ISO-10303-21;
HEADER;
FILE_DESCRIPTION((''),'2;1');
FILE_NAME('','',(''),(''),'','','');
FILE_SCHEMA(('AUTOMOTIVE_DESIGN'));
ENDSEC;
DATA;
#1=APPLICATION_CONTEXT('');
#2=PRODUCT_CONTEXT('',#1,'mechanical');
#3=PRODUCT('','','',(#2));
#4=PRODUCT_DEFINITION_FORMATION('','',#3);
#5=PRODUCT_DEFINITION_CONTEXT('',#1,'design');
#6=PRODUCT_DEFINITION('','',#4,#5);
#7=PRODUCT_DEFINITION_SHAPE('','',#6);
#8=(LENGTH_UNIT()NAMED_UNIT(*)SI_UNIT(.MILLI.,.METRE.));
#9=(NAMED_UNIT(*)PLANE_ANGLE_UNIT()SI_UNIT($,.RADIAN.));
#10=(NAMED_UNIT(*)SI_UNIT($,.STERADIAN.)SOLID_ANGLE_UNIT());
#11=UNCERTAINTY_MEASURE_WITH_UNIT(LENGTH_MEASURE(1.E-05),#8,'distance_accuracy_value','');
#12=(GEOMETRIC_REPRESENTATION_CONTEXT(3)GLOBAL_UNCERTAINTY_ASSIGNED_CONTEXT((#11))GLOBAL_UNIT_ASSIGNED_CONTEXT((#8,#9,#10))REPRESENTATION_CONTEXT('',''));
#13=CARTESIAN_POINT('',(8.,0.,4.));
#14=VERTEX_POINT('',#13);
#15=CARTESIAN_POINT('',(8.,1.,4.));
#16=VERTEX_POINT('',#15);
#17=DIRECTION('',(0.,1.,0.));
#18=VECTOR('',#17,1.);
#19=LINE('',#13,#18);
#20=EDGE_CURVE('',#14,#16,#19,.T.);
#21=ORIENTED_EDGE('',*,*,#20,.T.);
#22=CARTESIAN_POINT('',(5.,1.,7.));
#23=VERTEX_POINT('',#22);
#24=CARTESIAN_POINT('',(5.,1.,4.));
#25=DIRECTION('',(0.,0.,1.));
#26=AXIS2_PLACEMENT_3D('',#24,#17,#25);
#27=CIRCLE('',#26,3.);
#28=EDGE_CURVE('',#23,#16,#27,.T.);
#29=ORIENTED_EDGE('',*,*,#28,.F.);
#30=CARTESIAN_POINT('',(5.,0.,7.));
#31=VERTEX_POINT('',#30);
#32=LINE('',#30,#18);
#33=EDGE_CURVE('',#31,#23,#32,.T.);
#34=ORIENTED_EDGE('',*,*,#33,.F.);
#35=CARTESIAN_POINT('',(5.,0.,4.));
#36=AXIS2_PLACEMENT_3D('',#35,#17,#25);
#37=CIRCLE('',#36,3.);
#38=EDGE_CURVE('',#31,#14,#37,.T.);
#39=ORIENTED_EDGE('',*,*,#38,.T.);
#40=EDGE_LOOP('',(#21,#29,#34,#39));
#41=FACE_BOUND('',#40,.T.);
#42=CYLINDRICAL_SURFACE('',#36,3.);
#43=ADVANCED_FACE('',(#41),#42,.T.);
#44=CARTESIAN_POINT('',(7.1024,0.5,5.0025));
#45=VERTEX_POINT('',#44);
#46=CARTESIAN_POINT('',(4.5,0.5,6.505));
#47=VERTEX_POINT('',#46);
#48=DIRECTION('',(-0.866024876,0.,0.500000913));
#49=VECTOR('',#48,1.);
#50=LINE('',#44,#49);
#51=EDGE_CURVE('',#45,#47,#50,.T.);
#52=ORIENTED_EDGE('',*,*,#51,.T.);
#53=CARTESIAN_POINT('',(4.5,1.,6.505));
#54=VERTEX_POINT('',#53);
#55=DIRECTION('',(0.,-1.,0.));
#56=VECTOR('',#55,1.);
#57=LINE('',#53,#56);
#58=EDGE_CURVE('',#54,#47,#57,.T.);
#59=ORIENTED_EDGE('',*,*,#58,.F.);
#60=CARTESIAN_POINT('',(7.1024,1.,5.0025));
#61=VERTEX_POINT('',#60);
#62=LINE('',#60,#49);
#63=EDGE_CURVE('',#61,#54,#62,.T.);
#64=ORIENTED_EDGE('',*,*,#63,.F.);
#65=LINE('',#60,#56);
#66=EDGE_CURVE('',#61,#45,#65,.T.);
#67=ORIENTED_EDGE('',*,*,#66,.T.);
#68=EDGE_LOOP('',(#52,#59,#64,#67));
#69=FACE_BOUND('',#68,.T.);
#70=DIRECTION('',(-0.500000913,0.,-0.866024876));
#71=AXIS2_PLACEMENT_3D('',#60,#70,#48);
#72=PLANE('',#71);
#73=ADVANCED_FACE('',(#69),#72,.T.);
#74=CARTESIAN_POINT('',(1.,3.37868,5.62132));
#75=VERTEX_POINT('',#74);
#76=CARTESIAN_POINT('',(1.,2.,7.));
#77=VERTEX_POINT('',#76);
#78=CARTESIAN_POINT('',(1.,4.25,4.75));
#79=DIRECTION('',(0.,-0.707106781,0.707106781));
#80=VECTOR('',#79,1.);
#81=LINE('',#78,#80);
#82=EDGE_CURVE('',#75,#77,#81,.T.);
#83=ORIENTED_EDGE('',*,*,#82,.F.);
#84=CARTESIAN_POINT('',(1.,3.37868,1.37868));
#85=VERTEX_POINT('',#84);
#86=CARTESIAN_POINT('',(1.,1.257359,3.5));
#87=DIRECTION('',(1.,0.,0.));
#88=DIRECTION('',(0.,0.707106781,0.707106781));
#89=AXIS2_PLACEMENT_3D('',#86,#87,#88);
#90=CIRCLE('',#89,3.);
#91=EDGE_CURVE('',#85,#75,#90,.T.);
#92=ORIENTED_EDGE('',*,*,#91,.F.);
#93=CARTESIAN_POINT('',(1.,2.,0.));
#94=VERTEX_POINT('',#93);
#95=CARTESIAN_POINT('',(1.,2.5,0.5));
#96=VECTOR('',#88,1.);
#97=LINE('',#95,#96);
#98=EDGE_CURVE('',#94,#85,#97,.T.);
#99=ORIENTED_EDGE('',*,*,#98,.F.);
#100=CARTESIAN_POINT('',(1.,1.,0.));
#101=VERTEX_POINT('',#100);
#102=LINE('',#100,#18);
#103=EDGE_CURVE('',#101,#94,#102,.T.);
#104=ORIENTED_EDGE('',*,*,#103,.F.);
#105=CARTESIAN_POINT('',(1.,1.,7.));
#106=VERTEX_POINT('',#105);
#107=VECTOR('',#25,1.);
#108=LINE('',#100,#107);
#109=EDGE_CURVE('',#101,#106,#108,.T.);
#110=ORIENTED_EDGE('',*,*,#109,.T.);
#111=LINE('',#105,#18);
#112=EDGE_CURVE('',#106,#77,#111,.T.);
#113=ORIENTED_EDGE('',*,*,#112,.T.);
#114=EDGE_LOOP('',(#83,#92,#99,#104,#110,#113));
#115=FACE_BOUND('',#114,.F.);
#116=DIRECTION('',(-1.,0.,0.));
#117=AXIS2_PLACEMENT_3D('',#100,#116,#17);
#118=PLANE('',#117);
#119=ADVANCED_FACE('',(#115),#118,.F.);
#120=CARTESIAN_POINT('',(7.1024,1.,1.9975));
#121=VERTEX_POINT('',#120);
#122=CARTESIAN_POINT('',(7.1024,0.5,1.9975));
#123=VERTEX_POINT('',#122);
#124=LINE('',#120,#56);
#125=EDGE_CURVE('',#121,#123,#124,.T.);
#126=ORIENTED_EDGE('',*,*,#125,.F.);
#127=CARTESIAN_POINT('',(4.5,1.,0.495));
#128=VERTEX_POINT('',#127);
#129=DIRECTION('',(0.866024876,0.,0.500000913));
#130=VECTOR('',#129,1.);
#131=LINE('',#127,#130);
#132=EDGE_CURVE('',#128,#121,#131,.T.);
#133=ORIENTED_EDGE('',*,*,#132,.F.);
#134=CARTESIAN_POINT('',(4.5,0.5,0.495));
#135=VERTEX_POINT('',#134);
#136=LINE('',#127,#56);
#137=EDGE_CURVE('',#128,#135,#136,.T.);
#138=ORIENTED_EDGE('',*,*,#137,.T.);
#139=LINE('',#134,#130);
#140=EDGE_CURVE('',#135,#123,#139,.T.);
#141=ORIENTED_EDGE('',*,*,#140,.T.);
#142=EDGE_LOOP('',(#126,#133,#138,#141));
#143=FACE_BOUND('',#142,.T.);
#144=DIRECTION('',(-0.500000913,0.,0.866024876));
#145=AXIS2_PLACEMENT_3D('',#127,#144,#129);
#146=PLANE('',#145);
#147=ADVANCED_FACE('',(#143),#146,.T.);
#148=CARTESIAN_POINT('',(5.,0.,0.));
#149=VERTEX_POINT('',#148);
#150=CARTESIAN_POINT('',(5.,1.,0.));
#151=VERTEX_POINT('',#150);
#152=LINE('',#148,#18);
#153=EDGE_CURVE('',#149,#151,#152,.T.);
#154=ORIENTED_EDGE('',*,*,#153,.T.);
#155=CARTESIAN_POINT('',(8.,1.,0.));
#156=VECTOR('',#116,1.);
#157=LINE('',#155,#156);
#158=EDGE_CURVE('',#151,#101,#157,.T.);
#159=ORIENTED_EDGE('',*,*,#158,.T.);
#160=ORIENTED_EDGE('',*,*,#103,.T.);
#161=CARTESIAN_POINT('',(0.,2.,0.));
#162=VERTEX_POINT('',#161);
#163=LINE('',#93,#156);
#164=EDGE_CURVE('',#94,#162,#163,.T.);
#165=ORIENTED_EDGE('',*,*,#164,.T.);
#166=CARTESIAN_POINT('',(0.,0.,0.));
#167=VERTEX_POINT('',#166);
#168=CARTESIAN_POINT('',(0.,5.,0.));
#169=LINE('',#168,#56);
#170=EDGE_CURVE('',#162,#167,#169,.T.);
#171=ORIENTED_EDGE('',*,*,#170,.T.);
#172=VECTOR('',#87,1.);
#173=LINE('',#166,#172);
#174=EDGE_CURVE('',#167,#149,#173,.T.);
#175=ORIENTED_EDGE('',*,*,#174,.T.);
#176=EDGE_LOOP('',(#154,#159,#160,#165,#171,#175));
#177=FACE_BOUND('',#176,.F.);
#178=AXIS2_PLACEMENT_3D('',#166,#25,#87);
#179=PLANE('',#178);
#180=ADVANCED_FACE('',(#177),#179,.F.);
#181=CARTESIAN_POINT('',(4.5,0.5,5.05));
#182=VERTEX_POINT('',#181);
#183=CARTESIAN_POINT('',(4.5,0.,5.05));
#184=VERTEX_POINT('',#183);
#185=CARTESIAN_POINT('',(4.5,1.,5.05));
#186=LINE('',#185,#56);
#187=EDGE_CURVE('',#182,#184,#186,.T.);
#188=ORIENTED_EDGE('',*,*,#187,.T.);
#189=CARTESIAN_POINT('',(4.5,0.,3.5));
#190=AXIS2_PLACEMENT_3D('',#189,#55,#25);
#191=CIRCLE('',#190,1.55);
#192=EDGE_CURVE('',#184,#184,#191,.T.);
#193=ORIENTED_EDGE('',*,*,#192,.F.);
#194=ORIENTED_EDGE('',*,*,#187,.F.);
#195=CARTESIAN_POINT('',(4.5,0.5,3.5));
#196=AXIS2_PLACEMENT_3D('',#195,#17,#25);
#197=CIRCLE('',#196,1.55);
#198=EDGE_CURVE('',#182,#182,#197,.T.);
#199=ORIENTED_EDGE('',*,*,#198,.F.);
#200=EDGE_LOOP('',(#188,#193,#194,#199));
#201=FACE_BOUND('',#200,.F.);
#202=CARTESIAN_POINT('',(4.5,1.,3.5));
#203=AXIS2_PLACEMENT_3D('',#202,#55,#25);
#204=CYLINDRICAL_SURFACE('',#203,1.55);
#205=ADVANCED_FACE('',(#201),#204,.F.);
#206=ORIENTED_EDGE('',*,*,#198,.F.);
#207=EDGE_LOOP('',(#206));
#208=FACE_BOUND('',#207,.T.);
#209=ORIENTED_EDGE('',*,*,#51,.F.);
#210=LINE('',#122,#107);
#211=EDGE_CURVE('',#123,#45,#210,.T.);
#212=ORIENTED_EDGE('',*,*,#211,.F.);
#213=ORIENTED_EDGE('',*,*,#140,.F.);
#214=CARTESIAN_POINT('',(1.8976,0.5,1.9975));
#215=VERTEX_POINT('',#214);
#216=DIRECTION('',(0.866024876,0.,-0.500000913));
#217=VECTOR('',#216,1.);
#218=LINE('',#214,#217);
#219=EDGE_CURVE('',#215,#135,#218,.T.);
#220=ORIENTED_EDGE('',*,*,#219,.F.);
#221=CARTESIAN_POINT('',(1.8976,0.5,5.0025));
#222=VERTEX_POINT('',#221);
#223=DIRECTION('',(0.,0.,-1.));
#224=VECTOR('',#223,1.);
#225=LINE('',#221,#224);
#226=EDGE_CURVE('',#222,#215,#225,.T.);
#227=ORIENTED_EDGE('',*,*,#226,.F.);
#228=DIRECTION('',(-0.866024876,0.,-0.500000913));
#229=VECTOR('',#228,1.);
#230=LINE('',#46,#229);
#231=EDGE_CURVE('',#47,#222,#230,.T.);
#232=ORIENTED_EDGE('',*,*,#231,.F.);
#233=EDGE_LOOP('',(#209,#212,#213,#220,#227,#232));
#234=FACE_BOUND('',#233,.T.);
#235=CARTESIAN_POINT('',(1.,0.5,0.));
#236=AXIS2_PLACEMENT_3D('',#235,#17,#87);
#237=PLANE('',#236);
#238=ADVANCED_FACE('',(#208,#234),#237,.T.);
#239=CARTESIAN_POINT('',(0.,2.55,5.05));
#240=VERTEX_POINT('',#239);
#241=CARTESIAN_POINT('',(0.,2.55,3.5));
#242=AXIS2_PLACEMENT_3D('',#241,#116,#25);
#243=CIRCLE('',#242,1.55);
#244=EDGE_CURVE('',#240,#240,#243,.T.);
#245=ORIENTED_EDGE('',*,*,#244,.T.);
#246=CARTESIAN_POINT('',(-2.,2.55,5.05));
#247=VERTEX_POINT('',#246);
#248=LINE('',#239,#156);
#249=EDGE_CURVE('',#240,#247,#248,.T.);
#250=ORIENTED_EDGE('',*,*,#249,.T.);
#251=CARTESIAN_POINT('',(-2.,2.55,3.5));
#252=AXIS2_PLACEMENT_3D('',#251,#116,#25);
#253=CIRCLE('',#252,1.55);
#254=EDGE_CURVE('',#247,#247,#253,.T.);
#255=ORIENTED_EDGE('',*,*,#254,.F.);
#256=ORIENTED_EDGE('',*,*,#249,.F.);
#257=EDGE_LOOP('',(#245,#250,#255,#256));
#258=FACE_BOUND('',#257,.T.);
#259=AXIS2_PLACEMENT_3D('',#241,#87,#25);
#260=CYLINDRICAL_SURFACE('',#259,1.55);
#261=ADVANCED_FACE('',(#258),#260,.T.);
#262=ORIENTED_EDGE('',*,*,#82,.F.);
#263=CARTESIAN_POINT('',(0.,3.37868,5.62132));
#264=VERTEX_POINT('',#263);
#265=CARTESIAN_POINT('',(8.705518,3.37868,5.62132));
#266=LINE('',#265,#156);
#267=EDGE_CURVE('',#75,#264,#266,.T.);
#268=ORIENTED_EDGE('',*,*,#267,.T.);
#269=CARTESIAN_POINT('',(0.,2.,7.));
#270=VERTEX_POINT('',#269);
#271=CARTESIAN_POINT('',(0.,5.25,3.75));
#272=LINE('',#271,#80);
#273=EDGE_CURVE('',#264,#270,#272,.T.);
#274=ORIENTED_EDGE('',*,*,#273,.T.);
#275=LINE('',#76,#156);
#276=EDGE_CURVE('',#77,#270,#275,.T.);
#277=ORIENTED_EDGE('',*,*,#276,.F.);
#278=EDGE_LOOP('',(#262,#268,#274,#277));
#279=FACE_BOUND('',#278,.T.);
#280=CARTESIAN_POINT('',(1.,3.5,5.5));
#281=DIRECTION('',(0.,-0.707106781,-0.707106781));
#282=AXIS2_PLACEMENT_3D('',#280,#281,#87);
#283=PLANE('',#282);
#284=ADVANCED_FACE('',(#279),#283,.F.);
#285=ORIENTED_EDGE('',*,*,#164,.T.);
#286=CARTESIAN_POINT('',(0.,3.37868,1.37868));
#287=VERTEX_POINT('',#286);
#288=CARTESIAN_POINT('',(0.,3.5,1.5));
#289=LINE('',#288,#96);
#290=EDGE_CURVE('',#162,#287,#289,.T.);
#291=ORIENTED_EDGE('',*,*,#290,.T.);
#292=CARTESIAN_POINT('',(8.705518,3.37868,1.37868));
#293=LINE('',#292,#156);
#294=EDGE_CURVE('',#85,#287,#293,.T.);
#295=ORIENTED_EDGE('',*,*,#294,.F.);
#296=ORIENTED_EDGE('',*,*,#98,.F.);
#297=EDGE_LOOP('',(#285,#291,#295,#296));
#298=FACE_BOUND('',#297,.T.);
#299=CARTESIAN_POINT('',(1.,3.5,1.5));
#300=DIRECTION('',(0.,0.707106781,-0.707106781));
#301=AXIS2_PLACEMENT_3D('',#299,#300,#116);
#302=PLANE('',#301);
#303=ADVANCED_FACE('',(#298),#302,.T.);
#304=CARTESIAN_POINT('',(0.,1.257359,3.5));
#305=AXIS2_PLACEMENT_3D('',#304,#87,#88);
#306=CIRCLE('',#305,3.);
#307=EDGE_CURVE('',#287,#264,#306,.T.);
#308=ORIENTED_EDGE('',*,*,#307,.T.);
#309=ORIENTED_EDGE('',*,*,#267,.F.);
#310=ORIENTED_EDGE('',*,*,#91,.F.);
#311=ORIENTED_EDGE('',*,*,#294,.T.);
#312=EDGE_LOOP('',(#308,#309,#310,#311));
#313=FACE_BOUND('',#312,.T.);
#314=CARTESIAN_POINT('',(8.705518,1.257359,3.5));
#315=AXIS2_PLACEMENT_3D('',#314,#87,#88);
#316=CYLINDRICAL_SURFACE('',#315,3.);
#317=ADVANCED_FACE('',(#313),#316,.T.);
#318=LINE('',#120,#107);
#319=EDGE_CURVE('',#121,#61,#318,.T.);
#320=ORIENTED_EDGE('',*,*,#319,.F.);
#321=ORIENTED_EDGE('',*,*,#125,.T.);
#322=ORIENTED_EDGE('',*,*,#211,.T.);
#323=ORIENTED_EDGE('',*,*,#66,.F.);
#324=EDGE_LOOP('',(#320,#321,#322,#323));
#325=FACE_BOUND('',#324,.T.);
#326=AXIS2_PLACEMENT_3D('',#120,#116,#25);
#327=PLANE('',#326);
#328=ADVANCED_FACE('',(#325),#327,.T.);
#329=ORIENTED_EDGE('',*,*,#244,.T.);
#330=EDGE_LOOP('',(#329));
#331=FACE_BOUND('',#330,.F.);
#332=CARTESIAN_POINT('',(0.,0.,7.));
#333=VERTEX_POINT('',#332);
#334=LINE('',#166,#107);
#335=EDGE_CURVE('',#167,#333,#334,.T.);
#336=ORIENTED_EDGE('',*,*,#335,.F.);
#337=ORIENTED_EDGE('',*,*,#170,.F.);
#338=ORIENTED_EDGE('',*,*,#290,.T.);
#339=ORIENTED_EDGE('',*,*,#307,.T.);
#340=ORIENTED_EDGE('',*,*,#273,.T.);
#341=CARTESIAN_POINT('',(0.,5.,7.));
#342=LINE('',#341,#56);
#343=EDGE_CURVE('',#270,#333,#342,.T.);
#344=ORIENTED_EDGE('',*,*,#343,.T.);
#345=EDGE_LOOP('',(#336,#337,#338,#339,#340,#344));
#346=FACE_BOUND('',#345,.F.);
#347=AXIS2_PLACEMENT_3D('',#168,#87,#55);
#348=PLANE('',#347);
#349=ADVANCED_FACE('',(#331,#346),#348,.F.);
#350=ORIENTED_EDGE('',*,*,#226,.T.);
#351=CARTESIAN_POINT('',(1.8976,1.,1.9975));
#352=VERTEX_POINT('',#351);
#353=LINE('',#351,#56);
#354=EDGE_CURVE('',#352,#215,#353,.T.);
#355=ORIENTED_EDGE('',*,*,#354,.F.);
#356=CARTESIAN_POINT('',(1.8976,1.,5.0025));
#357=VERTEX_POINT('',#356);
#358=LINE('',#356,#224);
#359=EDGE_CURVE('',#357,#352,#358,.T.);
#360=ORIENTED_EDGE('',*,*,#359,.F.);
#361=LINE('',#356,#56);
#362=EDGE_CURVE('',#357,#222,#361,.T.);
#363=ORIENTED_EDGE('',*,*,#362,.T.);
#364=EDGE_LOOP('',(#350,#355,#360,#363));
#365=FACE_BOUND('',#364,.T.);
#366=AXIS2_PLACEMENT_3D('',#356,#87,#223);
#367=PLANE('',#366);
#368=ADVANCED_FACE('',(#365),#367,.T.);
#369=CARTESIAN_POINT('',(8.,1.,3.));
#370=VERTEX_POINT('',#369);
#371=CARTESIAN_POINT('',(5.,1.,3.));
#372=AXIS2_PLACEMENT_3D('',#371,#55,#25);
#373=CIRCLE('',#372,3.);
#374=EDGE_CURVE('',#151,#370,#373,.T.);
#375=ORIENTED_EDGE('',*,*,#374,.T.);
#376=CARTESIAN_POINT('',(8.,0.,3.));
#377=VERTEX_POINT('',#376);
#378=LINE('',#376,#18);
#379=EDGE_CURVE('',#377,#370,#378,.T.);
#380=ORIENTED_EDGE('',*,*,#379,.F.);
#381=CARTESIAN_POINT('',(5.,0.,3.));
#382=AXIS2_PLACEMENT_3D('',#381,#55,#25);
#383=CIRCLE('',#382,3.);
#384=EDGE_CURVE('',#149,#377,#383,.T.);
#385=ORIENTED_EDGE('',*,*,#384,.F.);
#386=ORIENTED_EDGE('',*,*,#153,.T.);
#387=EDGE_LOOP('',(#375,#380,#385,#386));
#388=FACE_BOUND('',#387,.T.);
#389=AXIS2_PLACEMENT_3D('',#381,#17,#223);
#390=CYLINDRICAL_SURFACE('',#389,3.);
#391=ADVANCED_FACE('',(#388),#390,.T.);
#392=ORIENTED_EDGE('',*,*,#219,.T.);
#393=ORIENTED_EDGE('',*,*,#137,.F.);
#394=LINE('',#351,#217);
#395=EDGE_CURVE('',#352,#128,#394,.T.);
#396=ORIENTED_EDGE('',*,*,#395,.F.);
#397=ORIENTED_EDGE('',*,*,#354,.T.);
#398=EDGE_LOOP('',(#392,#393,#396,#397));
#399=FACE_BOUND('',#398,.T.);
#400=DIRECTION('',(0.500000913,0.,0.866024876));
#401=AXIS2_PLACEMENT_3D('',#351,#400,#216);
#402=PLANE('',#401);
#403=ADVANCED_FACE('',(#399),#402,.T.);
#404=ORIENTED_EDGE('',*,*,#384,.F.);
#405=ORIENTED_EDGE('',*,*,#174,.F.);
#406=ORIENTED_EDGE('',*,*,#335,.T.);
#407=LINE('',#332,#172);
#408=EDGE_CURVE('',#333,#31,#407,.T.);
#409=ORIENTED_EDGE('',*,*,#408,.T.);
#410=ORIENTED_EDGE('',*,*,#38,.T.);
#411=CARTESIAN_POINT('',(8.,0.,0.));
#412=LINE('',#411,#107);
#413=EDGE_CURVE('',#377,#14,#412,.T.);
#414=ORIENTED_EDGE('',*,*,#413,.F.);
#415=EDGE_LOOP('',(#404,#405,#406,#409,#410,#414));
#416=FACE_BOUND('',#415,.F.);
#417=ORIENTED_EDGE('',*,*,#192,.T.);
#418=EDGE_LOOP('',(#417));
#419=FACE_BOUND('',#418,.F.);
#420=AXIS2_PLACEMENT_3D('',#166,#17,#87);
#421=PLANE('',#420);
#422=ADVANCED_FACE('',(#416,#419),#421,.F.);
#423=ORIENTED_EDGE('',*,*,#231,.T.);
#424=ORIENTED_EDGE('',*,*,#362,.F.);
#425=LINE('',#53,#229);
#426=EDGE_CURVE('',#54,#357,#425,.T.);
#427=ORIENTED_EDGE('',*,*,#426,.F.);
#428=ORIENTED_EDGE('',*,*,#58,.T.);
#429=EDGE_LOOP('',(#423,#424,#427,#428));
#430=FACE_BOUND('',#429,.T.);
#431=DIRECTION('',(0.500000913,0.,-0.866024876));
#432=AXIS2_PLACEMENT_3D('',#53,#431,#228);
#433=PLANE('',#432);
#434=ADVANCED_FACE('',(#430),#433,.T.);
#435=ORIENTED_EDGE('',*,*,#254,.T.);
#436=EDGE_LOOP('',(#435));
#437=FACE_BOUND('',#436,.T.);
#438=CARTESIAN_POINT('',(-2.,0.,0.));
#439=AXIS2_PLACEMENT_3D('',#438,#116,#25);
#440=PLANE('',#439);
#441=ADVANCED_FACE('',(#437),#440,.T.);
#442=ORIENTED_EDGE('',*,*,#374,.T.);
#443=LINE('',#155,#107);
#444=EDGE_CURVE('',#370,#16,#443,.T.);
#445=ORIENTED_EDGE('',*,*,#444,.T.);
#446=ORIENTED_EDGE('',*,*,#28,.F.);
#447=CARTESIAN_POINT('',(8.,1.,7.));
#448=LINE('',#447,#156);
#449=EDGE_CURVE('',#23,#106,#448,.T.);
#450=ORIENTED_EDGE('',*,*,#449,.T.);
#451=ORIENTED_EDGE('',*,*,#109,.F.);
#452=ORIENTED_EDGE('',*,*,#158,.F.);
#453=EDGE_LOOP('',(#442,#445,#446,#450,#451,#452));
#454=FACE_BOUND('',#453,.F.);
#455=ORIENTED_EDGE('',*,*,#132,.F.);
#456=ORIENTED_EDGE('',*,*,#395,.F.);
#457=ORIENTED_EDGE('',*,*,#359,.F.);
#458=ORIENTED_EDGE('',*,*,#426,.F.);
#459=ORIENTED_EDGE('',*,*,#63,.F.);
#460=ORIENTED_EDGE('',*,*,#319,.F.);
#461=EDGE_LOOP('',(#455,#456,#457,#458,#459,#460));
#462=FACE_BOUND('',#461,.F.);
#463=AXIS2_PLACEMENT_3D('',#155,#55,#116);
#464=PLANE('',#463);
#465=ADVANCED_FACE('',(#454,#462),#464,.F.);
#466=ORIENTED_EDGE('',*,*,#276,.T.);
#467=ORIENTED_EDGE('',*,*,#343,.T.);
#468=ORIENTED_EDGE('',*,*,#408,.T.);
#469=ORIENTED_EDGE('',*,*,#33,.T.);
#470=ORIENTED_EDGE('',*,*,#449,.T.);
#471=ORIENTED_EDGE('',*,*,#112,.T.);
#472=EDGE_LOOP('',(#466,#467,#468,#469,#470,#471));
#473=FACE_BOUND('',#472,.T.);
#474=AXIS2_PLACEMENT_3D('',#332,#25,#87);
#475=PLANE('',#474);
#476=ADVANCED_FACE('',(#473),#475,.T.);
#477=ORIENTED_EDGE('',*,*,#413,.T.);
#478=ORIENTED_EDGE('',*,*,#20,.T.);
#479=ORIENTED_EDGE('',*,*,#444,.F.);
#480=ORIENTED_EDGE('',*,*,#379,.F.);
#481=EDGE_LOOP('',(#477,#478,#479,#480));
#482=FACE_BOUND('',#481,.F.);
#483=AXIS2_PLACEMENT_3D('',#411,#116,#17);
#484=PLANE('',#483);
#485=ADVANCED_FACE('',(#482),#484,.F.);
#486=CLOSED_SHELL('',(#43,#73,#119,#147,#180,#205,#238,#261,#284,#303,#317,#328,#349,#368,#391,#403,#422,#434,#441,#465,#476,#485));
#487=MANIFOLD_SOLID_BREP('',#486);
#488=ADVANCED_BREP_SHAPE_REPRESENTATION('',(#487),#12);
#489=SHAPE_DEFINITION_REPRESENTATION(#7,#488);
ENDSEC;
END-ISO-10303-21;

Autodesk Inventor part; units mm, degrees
ref_plane "YZ Plane" through (0, 0, 0) normal (1, 0, 0) x (0, 1, 0)
ref_plane "XZ Plane" through (0, 0, 0) normal (0, 1, 0) x (-1, 0, 0)
ref_plane "XY Plane" through (0, 0, 0) normal (0, 0, 1) x (1, 0, 0)
sketch "Sketch1" plane through (0, 0, 0) normal (0, 0, 1) x (1, 0, 0)
  line L0 (0, 0) -> (8, 0)
  line L1 (8, 0) -> (8, 1)
  line L2 (8, 1) -> (1, 1)
  line L3 (1, 1) -> (1, 5)
  line L4 (1, 5) -> (0, 5)
  line L5 (0, 5) -> (0, 0)
  dimension "d0" = 8
  dimension "d1" = 5
  dimension "d2" = 1
  dimension "d8" = 1
extrude "Extrusion1" add sketch "Sketch1" along normal blind 7
sketch "Sketch2" plane through (0, 0, 0) normal (-1, 0, 0) x (0, 0, 1)
  circle A0 centre (3.5, 2.55) radius 1.55
  line L0 (0, 0) -> (7, 0) projected
  line L1 (7, 5) -> (7, 0) projected
  dimension "d5" = 3.1
  dimension "d6" = 2.55
  dimension "d7" = 3.5
extrude "Extrusion2" add sketch "Sketch2" along normal blind 2
sketch "Sketch3" plane through (1, 1, 0) normal (0, 1, 0) x (1, 0, 0)
  line L0 (7, 0) -> (7, -7) projected
  line L1 (7, -7) -> (0, -7) projected
  point P0 (-1, 0)
  point P1 (3.5, -3.5)
  point P2 (3.5, -7)
  dimension "d11" = 3.5
  dimension "d12" = 3.5
hole "Hole1" at (4.5, 1, 3.5) direction (0, -1, 0) diameter 3.1 end through all
sketch "Sketch4" plane through (1, 1, 0) normal (0, 1, 0) x (1, 0, 0)
  line L0 (3.5, -0.495) -> (6.1024, -1.9975)
  line L1 (6.1024, -1.9975) -> (6.1024, -5.0025)
  line L2 (6.1024, -5.0025) -> (3.5, -6.505)
  line L3 (3.5, -6.505) -> (0.8976, -5.0025)
  line L4 (0.8976, -5.0025) -> (0.8976, -1.9975)
  line L5 (0.8976, -1.9975) -> (3.5, -0.495)
  circle A0 centre (3.5, -3.5) radius 1.55 projected
  point P0 (-1, 0)
  dimension "d20" = 6.01
fillet "Fillet1" radius 3 2 edges at (8, 0.5, 0) (8, 0.5, 7)
extrude "Extrusion3" cut sketch "Sketch4" against normal blind 0.5
chamfer "Chamfer1" distance 3 angle 45 2 edges at (0.5, 5, 7) (0.5, 5, 0)
fillet "Fillet2" radius 3 2 edges at (0.5, 5, 4) (0.5, 5, 3)
properties part number "mocowanie_tofa_CPY"
